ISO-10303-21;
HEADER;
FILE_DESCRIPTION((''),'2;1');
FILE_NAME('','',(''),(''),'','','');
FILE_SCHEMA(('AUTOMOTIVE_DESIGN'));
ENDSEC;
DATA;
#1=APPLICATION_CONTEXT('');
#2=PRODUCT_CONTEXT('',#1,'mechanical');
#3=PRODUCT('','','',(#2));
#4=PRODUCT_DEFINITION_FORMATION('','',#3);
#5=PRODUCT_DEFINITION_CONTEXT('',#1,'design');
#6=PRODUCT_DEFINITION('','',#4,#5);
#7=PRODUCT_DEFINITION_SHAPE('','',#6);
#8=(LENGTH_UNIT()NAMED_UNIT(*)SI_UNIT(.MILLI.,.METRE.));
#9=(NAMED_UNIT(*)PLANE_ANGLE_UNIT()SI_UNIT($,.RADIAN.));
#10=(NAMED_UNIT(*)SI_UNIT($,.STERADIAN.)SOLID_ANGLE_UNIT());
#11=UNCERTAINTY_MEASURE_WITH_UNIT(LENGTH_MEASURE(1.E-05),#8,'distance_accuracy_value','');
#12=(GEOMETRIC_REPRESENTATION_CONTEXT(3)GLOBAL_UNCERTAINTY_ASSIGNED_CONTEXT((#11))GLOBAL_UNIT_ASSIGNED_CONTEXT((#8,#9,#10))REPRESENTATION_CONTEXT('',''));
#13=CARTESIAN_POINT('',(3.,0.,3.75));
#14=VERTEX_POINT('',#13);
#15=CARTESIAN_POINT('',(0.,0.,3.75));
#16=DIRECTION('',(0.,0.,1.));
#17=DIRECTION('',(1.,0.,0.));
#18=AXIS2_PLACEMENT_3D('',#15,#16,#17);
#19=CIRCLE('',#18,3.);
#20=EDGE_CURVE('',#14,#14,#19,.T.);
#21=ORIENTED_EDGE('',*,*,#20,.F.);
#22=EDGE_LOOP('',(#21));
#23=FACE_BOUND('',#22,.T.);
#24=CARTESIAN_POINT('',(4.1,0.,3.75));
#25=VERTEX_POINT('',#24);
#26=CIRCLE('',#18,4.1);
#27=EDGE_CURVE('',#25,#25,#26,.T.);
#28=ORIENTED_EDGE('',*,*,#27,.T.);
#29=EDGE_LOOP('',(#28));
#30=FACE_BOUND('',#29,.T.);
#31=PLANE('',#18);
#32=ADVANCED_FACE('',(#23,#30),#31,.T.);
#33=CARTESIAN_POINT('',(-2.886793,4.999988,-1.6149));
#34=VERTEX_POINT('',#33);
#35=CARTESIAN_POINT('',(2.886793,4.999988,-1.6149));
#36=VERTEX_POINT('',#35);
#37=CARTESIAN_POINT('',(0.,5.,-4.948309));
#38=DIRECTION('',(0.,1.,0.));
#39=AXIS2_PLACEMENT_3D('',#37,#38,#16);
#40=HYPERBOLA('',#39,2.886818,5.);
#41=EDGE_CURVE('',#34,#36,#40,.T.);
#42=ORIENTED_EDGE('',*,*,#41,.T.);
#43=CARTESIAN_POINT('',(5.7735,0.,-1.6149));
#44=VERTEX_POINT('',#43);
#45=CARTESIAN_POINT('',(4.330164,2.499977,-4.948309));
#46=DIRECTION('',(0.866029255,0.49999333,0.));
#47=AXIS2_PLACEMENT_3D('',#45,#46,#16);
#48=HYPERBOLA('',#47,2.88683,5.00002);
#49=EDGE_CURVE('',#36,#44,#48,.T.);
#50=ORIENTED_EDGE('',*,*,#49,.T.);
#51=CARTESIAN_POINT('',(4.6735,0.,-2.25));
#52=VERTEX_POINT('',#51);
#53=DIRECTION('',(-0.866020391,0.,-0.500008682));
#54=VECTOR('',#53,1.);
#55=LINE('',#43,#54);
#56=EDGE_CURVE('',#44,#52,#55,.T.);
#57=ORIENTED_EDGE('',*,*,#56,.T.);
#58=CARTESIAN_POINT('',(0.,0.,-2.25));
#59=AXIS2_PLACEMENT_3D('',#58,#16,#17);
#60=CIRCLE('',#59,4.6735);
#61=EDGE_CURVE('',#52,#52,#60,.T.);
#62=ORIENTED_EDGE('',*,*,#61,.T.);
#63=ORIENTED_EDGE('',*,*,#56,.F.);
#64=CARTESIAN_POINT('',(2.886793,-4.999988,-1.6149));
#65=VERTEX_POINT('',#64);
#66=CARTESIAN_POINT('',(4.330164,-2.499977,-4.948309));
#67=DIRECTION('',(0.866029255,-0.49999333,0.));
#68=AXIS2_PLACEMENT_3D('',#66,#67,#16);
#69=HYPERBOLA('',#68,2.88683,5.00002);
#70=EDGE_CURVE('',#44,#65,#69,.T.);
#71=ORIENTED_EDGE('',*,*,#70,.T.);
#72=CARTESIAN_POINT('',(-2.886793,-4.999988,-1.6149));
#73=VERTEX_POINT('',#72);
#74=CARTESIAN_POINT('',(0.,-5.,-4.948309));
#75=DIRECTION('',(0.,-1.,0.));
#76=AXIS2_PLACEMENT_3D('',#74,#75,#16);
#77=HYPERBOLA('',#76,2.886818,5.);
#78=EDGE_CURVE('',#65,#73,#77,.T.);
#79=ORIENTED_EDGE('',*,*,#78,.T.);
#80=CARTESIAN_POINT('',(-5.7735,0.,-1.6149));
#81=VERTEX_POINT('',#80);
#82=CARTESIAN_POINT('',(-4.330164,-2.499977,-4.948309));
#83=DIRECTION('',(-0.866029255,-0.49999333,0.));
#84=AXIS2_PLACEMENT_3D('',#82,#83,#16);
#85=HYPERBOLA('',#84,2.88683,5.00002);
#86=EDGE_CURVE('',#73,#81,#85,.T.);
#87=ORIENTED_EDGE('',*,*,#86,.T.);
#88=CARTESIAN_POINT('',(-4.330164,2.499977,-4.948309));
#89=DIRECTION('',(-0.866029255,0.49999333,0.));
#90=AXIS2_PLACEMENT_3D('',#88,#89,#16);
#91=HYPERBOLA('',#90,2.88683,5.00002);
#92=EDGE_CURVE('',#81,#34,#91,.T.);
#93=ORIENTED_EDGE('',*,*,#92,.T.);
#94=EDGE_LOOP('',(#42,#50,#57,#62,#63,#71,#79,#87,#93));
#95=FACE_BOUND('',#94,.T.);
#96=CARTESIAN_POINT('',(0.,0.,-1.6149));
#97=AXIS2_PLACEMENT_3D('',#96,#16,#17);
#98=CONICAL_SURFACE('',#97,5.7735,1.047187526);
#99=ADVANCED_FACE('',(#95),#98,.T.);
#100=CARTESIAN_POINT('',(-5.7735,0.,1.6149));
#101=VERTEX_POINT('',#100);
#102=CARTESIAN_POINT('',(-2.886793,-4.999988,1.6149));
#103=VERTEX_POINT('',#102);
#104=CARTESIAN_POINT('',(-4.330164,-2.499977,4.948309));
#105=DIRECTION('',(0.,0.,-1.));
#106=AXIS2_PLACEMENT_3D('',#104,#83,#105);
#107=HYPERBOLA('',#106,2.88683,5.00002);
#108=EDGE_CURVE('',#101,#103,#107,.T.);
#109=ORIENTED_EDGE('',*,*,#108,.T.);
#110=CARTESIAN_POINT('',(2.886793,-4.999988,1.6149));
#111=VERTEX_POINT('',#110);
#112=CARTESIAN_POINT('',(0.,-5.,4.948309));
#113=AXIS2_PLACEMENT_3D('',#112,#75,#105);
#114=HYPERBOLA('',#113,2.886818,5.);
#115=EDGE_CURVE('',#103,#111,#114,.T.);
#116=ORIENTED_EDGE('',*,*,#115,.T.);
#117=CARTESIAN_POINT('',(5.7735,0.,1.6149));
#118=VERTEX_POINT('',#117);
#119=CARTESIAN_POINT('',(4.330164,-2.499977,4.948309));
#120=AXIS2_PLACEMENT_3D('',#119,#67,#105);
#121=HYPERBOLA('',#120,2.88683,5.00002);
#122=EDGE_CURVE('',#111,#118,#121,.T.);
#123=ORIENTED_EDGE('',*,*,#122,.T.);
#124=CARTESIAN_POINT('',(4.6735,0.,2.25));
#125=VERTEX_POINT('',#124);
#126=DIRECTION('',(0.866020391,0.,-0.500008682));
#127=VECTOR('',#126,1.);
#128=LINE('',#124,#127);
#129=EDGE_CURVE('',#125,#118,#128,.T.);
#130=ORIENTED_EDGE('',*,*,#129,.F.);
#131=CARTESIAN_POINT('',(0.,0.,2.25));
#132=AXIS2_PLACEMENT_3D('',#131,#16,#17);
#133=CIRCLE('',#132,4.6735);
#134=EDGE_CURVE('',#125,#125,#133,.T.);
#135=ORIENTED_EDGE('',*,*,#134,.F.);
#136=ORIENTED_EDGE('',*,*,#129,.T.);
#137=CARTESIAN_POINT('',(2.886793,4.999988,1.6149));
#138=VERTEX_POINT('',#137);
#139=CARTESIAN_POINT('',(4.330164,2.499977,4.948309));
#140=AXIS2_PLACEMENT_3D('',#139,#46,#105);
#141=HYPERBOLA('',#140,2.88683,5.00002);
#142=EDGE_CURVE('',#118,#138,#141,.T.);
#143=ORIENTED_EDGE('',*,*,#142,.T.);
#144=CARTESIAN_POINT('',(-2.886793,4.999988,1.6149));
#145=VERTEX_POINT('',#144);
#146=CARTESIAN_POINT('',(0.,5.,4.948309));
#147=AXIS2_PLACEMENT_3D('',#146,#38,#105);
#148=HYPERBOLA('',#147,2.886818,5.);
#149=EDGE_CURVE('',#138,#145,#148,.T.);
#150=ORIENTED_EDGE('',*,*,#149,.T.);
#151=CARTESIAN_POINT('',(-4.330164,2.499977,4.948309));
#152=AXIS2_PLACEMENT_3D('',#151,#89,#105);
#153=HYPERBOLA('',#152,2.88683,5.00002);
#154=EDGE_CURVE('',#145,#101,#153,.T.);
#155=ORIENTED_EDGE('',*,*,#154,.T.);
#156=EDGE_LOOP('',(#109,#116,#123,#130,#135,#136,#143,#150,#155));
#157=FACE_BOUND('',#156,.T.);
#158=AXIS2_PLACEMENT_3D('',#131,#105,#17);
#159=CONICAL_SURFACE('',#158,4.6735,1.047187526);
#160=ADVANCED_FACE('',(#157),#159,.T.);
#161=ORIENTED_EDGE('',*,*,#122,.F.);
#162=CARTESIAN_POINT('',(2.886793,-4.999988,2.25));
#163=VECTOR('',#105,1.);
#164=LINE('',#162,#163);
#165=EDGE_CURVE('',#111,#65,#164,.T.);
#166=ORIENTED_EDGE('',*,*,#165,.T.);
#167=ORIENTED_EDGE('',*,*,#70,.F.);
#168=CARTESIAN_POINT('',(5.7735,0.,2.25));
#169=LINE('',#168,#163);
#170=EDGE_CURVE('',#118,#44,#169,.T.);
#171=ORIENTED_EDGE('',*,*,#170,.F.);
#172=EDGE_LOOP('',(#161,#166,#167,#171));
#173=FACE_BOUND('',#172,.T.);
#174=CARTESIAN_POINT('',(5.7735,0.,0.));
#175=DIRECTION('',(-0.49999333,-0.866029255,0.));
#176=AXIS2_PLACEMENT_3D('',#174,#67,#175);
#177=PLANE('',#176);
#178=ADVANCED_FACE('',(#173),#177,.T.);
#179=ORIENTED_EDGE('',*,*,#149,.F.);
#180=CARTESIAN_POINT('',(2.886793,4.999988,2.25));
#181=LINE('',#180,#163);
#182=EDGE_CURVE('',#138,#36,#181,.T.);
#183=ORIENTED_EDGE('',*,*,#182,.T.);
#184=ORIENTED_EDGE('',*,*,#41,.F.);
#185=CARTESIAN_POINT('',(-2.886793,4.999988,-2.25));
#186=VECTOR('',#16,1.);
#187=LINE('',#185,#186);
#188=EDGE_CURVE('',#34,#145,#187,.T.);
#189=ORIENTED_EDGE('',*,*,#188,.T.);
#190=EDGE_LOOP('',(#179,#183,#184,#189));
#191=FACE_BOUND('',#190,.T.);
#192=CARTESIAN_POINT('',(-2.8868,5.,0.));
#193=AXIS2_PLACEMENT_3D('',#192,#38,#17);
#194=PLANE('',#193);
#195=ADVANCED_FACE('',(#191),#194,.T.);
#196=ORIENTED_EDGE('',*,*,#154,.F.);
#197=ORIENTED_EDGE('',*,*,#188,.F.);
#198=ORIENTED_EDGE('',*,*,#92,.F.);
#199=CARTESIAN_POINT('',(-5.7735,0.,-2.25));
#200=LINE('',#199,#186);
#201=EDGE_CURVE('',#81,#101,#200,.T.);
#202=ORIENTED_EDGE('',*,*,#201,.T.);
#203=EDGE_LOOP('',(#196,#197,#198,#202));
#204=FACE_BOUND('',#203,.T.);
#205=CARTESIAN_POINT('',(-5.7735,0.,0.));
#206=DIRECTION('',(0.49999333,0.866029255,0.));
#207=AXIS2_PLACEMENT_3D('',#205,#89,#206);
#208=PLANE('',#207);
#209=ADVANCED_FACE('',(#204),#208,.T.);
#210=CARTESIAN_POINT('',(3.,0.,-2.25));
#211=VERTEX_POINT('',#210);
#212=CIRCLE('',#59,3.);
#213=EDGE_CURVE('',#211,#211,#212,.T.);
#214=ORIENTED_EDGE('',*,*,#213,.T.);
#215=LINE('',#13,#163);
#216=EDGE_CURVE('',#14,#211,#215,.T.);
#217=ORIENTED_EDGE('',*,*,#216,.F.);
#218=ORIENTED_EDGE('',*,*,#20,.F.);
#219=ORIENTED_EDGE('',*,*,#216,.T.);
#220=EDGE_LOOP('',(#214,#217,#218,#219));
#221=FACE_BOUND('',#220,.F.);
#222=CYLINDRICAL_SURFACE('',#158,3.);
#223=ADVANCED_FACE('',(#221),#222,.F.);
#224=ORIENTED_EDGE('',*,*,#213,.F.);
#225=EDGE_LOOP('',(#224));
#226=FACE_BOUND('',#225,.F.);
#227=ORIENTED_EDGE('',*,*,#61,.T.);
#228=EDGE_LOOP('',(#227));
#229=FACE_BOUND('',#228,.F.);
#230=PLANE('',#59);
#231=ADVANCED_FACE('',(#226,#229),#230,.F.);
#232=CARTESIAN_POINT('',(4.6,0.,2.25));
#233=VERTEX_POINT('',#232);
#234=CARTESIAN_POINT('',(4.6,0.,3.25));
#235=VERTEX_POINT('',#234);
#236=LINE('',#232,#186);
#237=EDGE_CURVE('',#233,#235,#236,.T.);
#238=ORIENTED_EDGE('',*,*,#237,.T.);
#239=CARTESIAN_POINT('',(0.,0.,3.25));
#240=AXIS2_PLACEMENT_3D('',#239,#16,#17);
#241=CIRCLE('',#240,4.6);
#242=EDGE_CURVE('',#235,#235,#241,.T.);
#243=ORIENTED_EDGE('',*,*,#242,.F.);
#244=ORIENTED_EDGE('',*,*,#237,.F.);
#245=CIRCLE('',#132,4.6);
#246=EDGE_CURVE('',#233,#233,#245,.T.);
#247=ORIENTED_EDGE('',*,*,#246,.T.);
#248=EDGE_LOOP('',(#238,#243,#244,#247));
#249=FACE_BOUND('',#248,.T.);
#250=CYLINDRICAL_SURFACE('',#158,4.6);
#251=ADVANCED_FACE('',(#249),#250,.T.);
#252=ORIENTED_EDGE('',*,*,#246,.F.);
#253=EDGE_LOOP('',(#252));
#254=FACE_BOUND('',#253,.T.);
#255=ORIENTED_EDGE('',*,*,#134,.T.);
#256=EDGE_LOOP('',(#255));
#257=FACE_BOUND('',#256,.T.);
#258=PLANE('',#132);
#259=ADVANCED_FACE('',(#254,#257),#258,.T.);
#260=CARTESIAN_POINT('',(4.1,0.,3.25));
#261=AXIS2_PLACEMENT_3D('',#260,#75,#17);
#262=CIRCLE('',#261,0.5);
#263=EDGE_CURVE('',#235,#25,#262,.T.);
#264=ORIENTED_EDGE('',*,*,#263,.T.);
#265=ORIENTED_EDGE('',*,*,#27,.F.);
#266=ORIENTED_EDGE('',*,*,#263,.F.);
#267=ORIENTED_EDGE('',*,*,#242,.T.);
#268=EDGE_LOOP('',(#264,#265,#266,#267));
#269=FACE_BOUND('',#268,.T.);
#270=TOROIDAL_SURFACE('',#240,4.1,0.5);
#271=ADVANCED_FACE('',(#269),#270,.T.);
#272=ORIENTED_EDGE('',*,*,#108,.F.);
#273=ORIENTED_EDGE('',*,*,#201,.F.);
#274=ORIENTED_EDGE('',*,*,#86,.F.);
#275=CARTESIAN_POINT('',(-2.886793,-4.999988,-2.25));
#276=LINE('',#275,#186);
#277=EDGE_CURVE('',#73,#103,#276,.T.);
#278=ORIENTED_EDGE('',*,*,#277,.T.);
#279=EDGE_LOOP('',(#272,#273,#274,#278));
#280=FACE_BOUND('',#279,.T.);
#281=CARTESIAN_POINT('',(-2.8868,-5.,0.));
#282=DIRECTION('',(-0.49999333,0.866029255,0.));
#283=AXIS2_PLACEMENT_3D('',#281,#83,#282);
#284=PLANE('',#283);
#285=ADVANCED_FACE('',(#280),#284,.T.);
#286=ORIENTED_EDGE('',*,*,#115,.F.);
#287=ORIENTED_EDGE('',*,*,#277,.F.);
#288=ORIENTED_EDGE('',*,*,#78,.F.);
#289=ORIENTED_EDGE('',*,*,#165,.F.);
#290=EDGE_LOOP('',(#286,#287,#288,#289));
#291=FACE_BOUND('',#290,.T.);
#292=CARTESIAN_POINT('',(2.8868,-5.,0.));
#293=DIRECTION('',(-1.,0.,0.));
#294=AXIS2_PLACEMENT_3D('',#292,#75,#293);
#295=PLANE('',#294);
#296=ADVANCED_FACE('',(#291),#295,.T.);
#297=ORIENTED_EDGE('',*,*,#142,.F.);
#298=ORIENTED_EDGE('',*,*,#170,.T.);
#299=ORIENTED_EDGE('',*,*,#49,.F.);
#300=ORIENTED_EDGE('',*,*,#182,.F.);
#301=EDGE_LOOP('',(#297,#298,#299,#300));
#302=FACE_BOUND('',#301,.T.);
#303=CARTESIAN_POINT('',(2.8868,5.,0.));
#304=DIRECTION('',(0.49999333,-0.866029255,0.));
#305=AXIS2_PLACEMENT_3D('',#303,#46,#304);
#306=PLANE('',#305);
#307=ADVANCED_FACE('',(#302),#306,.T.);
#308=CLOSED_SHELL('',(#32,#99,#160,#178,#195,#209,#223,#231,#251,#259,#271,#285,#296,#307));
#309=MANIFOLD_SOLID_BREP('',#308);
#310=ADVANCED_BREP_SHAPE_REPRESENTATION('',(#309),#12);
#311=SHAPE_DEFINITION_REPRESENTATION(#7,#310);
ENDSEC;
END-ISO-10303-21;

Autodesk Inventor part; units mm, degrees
ref_plane "YZ Plane" through (0, 0, 0) normal (1, 0, 0) x (0, 1, 0)
ref_plane "XZ Plane" through (0, 0, 0) normal (0, 1, 0) x (-1, 0, 0)
ref_plane "XY Plane" through (0, 0, 0) normal (0, 0, 1) x (1, 0, 0)
sketch "Sketch1" plane through (0, 0, 0) normal (0, 0, 1) x (1, 0, 0)
  circle A0 centre (0, 0) radius 3
  line L0 (-2.8868, 5) -> (2.8868, 5)
  line L1 (2.8868, 5) -> (5.7735, 0)
  line L2 (5.7735, 0) -> (2.8868, -5)
  line L3 (2.8868, -5) -> (-2.8868, -5)
  line L4 (-2.8868, -5) -> (-5.7735, 0)
  line L5 (-5.7735, 0) -> (-2.8868, 5)
  dimension "d0" = 6
  dimension "d1" = 10
extrude "Extrusion1" add sketch "Sketch1" along normal mid plane 4.5
sketch "Sketch2" plane through (0, 0, 2.25) normal (0, 0, 1) x (1, 0, 0)
  circle A0 centre (0, 0) radius 3 projected
  circle A1 centre (0, 0) radius 4.6
  dimension "d6" = 9.2
extrude "Extrusion2" add sketch "Sketch2" along normal blind 1.5
sketch "Sketch4" plane through (0, 0, 0) normal (0, 1, 0) x (-1, 0, 0)
  line L0 (-2.8868, 2.25) -> (-5.7735, 2.25) projected
  line L1 (-5.7735, 2.25) -> (-5.7735, -2.25) projected
  line L2 (-5.7735, -2.25) -> (-2.8868, -2.25) projected
  line L3 (-2.8868, 2.25) -> (-2.8868, -2.25) projected
  line L4 (-4.6735, 2.25) -> (-5.7735, 1.6149)
  line L5 (-5.7735, -1.6149) -> (-4.6735, -2.25)
  line L6 (0, -3.5) -> (0, 3.5) projected
  dimension "d7" = 1.1
  dimension "d8" = 1.1
  dimension "d9" = 30
  dimension "d10" = 30
revolve "Revolution1" cut sketch "Sketch4" angle 360 about axis through (0, 0, -10) along (0, 0, 1) contours L4 L1 L0 | L2 L1 L5
fillet "Fillet1" radius 0.5 1 edges at (-4.6, 0, 3.75)
properties part number "M6 K-Nut Short" material "Steel"
